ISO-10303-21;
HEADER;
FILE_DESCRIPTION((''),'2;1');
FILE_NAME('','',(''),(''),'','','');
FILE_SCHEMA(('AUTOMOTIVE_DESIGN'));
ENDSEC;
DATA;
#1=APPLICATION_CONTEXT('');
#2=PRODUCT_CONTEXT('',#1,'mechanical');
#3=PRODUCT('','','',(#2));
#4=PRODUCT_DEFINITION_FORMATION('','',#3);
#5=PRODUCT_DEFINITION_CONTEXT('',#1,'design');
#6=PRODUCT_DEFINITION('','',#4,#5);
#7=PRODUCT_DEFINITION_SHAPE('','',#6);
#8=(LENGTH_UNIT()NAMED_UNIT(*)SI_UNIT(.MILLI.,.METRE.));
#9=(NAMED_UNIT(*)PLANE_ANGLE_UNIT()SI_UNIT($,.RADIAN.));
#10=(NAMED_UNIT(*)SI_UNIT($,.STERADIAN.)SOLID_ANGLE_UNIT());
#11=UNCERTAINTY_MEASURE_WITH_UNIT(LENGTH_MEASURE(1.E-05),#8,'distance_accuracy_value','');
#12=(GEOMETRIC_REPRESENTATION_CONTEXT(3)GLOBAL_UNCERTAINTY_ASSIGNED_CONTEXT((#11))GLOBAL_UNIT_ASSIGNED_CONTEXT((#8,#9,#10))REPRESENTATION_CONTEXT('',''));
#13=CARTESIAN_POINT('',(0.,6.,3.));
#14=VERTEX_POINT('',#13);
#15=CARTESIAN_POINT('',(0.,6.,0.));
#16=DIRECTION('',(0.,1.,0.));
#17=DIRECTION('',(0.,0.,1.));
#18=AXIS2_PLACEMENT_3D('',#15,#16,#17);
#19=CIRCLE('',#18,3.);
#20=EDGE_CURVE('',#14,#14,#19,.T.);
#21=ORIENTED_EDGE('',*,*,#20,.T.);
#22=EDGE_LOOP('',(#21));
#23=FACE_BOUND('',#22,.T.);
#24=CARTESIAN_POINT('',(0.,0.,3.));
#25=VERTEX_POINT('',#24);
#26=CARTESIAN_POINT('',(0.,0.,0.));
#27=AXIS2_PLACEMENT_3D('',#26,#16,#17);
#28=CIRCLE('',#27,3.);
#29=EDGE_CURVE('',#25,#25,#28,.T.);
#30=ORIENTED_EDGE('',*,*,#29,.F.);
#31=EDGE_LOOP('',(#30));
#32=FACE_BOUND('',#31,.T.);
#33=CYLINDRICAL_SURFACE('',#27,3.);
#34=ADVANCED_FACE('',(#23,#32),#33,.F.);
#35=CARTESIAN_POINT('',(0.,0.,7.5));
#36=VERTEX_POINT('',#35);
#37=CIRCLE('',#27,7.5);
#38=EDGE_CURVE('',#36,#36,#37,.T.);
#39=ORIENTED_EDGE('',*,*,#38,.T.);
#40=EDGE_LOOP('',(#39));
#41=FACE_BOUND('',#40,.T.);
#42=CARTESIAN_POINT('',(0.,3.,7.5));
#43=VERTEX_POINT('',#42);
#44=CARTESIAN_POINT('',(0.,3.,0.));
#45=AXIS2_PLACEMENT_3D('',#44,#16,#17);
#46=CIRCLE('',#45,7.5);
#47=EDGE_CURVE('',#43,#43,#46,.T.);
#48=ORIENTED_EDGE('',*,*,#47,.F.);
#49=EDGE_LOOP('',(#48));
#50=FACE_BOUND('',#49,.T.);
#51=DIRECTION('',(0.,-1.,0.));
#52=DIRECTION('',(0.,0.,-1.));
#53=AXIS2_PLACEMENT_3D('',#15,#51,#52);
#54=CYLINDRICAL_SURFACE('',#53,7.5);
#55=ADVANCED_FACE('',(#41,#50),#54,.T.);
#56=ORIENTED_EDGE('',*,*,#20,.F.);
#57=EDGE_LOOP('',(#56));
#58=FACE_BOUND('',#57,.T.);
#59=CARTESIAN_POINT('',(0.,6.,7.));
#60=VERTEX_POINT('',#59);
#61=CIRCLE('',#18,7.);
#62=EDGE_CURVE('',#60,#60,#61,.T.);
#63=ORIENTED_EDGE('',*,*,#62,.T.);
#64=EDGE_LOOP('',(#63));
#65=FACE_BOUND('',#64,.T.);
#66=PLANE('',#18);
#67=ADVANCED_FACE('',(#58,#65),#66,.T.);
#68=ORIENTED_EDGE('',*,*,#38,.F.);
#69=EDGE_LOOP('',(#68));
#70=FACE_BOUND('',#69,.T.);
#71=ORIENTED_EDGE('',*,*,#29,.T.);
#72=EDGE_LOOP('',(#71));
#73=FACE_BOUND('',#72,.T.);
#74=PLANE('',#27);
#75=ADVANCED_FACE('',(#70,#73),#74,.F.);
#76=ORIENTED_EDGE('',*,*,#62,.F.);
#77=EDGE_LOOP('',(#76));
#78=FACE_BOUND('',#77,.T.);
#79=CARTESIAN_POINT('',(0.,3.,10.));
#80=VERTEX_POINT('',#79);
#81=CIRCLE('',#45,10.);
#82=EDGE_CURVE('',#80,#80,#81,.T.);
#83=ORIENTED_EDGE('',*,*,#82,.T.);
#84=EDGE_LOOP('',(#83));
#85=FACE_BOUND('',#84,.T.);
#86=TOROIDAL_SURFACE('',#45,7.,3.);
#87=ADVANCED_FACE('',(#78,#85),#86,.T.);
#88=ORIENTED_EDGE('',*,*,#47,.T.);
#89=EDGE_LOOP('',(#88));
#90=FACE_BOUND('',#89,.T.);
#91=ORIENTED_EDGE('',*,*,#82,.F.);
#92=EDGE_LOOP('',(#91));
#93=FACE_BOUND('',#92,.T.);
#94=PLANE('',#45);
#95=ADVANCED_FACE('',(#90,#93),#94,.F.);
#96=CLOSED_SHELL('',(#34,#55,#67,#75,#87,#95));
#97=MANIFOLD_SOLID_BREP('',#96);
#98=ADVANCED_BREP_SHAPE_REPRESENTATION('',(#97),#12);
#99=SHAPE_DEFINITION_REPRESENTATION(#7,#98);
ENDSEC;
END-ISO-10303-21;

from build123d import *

# Parameters (mm, degrees)
SKETCH1_R           = 7.5
BOSS_EXTRUDE1_DEPTH = 6
BOSS_EXTRUDE2_START = -3
SKETCH2_R           = 10
SKETCH2_R_2         = 7.5
BOSS_EXTRUDE2_DEPTH = 3
FILLET1_R           = 3
SKETCH3_R           = 3
CUT_EXTRUDE1_DEPTH  = 16.362291496


with BuildPart() as part:
    # Sketch1 → Boss-Extrude1 (new body)
    with BuildSketch(Plane(origin=(0, 0, 0), x_dir=(1, 0, 0), z_dir=(0, 1, 0))):
        with Locations(Location((0, 0, 0), (0, 0, 270))):
            Circle(SKETCH1_R)
    extrude(amount=BOSS_EXTRUDE1_DEPTH)

    # Sketch2 → Boss-Extrude2 (add)
    with BuildSketch(Plane(origin=(0, 6, 0), x_dir=(1, 0, 0), z_dir=(0, 1, 0)).offset(BOSS_EXTRUDE2_START)):
        with Locations(Location((0, 0, 0), (0, 0, 270))):
            Circle(SKETCH2_R)
        with Locations(Location((0, 0, 0), (0, 0, 270))):
            Circle(SKETCH2_R_2, mode=Mode.SUBTRACT)
    extrude(amount=BOSS_EXTRUDE2_DEPTH)

    # Fillet1
    fillet1_edges = [part.edges().sort_by_distance(p)[0] for p in [
        (0, 6, -10),
    ]]
    fillet(fillet1_edges, radius=FILLET1_R - 0.0001)  # a hair under: the kernel refuses the full size

    # Sketch3 → Cut-Extrude1 (cut, through all)
    with BuildSketch(Plane(origin=(0, 6, 0), x_dir=(1, 0, 0), z_dir=(0, 1, 0))):
        with Locations(Location((0, 0, 0), (0, 0, 270))):
            Circle(SKETCH3_R)
    extrude(amount=-CUT_EXTRUDE1_DEPTH, mode=Mode.SUBTRACT)


solid = part.part
